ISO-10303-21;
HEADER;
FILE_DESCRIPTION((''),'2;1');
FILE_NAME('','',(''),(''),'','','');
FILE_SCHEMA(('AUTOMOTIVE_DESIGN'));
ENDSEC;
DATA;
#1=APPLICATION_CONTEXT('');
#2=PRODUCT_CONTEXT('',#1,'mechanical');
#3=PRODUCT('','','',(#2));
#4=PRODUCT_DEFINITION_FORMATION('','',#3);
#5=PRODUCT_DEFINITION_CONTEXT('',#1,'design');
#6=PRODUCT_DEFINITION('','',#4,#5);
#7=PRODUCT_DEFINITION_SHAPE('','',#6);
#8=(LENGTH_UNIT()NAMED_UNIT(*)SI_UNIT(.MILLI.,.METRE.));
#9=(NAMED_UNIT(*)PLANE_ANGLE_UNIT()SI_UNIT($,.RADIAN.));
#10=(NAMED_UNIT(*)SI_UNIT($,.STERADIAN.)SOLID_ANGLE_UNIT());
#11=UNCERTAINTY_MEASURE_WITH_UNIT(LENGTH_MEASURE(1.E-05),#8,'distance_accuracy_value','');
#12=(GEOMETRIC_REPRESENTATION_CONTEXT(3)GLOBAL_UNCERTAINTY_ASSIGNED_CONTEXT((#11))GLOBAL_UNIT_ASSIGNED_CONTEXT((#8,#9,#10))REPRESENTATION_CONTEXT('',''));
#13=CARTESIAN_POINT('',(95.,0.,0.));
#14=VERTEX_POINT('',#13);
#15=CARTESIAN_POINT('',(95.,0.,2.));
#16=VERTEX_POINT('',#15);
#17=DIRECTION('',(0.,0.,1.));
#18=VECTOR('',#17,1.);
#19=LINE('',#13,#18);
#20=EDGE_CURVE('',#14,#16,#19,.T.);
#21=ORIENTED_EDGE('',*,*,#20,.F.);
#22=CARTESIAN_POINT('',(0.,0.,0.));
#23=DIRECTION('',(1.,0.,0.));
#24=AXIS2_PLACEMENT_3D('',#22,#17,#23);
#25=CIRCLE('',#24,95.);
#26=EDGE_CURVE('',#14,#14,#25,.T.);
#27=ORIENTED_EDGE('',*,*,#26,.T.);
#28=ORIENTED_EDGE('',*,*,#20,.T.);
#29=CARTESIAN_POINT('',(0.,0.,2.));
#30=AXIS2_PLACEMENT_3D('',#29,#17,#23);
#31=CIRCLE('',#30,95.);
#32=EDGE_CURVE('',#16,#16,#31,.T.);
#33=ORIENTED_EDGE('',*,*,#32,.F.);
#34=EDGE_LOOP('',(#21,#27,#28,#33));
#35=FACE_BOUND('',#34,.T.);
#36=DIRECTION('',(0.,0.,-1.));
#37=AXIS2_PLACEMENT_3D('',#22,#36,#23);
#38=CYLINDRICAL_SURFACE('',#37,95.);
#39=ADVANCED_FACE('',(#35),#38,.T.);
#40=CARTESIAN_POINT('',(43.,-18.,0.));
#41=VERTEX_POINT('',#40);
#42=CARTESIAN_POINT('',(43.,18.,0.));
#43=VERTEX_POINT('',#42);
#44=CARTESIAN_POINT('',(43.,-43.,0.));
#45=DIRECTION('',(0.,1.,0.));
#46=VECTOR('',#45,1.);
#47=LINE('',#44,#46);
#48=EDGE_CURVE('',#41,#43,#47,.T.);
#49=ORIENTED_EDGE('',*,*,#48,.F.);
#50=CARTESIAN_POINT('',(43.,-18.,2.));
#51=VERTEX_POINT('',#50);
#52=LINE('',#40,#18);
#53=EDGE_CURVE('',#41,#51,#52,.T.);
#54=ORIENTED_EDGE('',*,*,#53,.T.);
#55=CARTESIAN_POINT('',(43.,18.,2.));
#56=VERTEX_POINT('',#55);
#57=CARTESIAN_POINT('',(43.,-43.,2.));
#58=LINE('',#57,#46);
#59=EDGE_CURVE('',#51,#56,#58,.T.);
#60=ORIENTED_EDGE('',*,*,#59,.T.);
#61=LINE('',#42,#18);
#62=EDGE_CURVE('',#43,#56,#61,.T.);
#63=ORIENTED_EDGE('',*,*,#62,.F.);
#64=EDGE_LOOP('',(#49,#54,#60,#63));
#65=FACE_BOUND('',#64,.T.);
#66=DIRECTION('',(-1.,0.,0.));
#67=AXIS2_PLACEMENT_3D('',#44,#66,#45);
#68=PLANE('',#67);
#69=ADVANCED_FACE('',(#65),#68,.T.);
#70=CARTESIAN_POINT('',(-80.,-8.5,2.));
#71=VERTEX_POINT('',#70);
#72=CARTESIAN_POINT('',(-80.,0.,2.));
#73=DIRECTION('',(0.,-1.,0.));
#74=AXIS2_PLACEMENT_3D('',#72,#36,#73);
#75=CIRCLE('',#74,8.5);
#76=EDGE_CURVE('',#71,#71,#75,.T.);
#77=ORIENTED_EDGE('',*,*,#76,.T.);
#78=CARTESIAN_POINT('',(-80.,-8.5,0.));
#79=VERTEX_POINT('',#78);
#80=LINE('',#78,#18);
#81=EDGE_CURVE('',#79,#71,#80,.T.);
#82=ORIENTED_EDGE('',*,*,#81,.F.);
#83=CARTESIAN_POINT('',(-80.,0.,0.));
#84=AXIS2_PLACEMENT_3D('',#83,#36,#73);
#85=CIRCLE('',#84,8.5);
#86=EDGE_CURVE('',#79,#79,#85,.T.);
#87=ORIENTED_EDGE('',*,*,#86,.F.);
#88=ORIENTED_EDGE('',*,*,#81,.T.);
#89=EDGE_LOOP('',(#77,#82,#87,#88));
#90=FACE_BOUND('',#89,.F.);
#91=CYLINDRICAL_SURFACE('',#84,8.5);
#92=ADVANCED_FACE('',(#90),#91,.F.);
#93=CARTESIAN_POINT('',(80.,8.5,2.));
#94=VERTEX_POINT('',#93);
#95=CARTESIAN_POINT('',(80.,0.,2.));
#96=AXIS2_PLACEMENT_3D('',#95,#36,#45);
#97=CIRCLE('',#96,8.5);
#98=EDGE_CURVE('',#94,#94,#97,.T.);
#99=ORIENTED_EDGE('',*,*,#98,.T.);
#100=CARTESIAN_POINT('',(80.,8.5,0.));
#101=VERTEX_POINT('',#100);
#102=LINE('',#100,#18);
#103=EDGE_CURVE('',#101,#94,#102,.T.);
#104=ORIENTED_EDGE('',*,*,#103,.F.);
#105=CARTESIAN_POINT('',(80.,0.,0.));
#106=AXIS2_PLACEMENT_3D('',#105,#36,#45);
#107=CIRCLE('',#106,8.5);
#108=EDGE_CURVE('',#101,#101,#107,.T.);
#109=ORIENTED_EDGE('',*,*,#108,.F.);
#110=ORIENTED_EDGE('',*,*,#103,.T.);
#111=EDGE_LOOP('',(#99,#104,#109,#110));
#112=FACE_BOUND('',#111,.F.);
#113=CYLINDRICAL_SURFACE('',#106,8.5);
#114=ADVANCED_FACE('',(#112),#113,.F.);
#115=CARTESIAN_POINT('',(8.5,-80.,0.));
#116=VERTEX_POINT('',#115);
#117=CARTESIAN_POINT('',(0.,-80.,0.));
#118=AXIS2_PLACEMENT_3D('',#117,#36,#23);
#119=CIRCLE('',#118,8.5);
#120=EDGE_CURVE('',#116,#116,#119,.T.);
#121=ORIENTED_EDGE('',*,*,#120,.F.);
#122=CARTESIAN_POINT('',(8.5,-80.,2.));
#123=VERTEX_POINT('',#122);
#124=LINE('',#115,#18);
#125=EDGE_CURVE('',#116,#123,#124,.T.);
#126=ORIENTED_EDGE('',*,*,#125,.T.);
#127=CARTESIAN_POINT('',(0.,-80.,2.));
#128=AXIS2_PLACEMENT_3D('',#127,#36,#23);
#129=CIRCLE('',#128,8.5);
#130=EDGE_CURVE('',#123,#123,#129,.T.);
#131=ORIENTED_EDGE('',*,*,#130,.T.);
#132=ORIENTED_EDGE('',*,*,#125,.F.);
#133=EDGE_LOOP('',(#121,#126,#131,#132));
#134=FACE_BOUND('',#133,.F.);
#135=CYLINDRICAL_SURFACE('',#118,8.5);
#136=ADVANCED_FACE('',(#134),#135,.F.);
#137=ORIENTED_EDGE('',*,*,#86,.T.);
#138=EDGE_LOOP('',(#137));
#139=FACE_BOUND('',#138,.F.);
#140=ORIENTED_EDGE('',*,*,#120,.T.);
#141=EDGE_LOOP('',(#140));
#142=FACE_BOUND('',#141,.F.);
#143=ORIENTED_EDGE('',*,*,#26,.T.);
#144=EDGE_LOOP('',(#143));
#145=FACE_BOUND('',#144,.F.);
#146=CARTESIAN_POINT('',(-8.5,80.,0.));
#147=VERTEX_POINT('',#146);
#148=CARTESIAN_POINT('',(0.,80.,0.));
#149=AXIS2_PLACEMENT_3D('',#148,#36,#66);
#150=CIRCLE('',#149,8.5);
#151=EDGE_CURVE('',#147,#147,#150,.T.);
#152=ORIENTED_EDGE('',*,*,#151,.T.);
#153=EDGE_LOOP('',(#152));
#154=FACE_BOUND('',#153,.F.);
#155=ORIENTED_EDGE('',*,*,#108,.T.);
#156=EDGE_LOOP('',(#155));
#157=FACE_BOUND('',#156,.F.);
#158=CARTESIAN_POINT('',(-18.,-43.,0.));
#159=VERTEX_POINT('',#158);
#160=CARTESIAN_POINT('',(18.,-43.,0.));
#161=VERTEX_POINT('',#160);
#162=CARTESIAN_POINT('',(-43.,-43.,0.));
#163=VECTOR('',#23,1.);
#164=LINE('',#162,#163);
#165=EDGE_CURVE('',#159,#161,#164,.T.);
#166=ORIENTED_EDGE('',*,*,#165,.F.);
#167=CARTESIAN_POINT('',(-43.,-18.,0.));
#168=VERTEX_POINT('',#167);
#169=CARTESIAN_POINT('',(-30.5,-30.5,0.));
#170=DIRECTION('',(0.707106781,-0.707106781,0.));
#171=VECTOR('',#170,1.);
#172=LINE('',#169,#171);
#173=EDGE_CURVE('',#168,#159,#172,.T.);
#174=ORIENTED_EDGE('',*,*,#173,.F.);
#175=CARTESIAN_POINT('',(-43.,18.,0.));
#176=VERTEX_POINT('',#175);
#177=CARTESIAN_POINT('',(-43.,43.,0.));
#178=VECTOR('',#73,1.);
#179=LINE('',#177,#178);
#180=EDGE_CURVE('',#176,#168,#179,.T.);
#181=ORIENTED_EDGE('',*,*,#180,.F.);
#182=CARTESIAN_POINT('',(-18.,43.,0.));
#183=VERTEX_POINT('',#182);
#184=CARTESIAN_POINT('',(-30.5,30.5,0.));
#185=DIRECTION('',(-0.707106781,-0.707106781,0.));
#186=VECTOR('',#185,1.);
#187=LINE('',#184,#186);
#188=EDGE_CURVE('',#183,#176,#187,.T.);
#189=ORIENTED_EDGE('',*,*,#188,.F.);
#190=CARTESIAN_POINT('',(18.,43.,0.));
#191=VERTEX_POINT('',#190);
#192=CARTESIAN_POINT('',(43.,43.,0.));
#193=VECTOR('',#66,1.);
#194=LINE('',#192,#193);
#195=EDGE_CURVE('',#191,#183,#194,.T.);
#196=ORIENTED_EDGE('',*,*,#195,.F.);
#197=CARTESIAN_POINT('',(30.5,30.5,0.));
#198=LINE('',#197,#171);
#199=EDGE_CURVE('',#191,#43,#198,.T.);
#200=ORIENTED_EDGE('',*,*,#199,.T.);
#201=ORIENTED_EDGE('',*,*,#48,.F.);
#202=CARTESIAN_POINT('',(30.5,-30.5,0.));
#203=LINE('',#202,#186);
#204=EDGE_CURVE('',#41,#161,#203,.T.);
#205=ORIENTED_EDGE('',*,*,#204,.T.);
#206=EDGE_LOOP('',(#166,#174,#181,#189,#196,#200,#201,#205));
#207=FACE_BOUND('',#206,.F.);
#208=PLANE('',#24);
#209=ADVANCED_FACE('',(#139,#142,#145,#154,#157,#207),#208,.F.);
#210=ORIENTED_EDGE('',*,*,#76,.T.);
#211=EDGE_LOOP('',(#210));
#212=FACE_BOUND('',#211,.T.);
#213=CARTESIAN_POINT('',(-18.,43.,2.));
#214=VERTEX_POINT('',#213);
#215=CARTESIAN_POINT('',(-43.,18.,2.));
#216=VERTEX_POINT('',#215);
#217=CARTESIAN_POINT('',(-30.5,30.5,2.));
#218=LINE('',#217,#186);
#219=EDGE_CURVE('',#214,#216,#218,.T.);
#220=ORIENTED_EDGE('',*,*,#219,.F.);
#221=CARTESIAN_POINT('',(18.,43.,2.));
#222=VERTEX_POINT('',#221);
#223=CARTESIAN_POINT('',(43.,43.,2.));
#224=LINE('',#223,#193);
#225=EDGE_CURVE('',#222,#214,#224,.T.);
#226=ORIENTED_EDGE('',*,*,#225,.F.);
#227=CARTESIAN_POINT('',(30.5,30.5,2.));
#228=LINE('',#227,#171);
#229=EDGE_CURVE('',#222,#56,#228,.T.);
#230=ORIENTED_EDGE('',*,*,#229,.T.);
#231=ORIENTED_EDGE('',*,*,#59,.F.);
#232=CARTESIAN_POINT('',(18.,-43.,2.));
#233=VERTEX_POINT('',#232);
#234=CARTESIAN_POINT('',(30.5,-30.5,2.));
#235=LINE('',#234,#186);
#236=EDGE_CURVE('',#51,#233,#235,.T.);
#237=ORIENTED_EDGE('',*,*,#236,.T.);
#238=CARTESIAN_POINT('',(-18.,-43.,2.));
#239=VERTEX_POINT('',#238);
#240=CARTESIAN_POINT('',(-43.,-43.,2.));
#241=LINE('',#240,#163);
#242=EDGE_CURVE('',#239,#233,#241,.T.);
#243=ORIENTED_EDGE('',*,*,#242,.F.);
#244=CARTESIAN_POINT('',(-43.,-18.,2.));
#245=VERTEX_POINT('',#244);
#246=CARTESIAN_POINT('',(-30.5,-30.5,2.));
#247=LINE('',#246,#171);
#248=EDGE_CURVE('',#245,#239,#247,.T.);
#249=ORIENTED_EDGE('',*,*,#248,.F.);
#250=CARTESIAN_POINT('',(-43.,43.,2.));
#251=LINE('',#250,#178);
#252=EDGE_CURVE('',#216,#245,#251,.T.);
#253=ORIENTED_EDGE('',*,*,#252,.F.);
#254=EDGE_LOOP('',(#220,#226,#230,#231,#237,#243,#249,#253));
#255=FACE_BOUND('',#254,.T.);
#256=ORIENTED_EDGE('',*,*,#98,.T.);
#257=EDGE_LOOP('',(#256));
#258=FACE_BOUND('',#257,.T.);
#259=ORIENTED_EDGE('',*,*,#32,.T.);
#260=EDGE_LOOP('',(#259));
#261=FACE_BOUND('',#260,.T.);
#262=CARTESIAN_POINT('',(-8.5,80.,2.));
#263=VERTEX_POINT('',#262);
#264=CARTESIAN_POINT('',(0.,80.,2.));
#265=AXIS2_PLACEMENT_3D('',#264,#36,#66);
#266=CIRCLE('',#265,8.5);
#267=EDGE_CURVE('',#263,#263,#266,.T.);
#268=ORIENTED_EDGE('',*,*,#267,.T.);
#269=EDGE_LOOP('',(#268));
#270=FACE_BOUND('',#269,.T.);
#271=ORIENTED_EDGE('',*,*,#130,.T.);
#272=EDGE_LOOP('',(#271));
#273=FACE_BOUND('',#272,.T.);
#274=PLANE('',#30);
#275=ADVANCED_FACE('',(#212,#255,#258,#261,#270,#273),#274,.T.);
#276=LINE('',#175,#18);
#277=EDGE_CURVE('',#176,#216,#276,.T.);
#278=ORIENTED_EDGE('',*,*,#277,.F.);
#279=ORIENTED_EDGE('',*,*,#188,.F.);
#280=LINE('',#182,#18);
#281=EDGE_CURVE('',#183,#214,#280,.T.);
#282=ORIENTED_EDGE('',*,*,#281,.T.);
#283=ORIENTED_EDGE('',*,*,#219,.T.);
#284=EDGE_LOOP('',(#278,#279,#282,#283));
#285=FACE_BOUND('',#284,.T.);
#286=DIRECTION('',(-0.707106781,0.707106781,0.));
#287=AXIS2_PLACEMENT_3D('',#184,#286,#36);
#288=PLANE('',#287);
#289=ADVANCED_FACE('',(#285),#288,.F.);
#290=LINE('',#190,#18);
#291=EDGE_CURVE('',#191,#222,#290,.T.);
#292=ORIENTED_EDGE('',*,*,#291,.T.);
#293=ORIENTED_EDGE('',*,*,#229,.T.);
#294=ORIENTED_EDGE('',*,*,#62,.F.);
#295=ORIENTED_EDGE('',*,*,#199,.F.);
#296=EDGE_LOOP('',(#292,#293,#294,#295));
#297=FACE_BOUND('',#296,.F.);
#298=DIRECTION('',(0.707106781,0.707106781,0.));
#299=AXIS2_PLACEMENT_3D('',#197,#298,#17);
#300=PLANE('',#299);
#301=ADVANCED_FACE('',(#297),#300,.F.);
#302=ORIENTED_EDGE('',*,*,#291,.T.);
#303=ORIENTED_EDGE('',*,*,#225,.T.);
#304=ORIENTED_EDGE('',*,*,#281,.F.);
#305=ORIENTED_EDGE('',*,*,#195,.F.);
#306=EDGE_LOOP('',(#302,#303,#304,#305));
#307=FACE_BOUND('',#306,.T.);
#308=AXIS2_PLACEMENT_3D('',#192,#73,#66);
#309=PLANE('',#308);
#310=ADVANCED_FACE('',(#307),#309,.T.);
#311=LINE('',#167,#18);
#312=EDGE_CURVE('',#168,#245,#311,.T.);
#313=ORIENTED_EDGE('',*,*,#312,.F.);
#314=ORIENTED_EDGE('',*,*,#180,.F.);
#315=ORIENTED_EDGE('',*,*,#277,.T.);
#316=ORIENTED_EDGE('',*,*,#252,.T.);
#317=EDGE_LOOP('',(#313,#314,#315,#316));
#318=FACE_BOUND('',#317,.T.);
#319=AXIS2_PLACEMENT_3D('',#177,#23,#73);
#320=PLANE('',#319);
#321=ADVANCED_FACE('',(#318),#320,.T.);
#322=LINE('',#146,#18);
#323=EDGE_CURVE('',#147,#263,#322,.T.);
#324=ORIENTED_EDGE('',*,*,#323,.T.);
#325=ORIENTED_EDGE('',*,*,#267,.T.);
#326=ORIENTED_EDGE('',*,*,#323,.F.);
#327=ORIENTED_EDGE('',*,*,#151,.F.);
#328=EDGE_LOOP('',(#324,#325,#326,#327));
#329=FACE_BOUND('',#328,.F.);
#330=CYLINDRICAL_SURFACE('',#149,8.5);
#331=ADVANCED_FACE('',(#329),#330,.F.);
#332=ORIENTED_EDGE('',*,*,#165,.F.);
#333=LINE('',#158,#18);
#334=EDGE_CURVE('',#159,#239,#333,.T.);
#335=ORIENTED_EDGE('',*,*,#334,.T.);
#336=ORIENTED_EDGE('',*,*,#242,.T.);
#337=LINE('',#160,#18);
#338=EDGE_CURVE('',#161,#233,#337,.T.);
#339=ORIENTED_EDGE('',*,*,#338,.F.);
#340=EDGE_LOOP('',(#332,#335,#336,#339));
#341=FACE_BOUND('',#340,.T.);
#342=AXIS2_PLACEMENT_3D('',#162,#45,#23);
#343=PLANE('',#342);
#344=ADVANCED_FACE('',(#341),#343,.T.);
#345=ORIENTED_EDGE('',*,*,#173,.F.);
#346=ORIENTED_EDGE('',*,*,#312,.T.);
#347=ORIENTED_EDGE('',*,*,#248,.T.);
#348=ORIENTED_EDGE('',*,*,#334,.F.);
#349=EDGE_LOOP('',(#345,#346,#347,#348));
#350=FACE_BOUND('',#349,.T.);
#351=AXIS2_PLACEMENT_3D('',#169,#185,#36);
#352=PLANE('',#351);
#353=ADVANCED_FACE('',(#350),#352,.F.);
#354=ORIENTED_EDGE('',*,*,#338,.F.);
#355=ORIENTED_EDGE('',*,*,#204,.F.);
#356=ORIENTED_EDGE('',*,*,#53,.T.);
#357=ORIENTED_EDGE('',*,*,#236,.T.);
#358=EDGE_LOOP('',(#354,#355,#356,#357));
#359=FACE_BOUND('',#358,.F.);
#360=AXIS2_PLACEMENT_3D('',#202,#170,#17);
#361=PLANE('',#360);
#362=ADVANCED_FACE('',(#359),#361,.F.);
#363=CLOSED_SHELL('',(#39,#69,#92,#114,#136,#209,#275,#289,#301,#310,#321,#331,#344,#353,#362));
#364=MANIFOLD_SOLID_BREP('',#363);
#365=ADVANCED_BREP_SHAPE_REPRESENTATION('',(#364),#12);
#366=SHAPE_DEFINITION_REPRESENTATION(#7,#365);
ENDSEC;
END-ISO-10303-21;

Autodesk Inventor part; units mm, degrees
ref_plane "YZ Plane" through (0, 0, 0) normal (1, 0, 0) x (0, 1, 0)
ref_plane "XZ Plane" through (0, 0, 0) normal (0, 1, 0) x (-1, 0, 0)
ref_plane "XY Plane" through (0, 0, 0) normal (0, 0, 1) x (1, 0, 0)
sketch "Sketch1" plane through (0, 0, 0) normal (0, 0, 1) x (1, 0, 0)
  circle A0 centre (0, 0) radius 95
  line L0 (43, 43) -> (-43, 43)
  line L1 (-43, 43) -> (-43, -43)
  line L2 (-43, -43) -> (43, -43)
  line L3 (43, -43) -> (43, 43)
  line L4 (43, 43) -> (-43, -43) construction
  line L5 (-43, 43) -> (43, -43) construction
  dimension "d157" = 190
  dimension "d158" = 86
  dimension "d159" = 86
extrude "Plate5" add sketch "Sketch1" along normal blind 2
sketch "Sketch7" plane through (0, 0, 0) normal (0, 0, -1) x (-1, 0, 0)
  circle A0 centre (0, 80) radius 8.5
  point P0 (0, 0)
  dimension "d160" = 17
  dimension "d161" = 80
extrude "Cut1" cut sketch "Sketch7" against normal blind 2
pattern_circular "Circular Pattern1" count 4 over 360 about axis through (0, 0, -10) along (0, 0, 1) of "Cut1"
chamfer "Corner Chamfer2" distance 25 angle 45 4 edges at (-43, -43, 1) (43, -43, 1) (-43, 43, 1) (43, 43, 1)
properties part number "PRS 1792  funnel FLANGE 1200 50-90_1000x90_1200" material "Stainless Steel"
